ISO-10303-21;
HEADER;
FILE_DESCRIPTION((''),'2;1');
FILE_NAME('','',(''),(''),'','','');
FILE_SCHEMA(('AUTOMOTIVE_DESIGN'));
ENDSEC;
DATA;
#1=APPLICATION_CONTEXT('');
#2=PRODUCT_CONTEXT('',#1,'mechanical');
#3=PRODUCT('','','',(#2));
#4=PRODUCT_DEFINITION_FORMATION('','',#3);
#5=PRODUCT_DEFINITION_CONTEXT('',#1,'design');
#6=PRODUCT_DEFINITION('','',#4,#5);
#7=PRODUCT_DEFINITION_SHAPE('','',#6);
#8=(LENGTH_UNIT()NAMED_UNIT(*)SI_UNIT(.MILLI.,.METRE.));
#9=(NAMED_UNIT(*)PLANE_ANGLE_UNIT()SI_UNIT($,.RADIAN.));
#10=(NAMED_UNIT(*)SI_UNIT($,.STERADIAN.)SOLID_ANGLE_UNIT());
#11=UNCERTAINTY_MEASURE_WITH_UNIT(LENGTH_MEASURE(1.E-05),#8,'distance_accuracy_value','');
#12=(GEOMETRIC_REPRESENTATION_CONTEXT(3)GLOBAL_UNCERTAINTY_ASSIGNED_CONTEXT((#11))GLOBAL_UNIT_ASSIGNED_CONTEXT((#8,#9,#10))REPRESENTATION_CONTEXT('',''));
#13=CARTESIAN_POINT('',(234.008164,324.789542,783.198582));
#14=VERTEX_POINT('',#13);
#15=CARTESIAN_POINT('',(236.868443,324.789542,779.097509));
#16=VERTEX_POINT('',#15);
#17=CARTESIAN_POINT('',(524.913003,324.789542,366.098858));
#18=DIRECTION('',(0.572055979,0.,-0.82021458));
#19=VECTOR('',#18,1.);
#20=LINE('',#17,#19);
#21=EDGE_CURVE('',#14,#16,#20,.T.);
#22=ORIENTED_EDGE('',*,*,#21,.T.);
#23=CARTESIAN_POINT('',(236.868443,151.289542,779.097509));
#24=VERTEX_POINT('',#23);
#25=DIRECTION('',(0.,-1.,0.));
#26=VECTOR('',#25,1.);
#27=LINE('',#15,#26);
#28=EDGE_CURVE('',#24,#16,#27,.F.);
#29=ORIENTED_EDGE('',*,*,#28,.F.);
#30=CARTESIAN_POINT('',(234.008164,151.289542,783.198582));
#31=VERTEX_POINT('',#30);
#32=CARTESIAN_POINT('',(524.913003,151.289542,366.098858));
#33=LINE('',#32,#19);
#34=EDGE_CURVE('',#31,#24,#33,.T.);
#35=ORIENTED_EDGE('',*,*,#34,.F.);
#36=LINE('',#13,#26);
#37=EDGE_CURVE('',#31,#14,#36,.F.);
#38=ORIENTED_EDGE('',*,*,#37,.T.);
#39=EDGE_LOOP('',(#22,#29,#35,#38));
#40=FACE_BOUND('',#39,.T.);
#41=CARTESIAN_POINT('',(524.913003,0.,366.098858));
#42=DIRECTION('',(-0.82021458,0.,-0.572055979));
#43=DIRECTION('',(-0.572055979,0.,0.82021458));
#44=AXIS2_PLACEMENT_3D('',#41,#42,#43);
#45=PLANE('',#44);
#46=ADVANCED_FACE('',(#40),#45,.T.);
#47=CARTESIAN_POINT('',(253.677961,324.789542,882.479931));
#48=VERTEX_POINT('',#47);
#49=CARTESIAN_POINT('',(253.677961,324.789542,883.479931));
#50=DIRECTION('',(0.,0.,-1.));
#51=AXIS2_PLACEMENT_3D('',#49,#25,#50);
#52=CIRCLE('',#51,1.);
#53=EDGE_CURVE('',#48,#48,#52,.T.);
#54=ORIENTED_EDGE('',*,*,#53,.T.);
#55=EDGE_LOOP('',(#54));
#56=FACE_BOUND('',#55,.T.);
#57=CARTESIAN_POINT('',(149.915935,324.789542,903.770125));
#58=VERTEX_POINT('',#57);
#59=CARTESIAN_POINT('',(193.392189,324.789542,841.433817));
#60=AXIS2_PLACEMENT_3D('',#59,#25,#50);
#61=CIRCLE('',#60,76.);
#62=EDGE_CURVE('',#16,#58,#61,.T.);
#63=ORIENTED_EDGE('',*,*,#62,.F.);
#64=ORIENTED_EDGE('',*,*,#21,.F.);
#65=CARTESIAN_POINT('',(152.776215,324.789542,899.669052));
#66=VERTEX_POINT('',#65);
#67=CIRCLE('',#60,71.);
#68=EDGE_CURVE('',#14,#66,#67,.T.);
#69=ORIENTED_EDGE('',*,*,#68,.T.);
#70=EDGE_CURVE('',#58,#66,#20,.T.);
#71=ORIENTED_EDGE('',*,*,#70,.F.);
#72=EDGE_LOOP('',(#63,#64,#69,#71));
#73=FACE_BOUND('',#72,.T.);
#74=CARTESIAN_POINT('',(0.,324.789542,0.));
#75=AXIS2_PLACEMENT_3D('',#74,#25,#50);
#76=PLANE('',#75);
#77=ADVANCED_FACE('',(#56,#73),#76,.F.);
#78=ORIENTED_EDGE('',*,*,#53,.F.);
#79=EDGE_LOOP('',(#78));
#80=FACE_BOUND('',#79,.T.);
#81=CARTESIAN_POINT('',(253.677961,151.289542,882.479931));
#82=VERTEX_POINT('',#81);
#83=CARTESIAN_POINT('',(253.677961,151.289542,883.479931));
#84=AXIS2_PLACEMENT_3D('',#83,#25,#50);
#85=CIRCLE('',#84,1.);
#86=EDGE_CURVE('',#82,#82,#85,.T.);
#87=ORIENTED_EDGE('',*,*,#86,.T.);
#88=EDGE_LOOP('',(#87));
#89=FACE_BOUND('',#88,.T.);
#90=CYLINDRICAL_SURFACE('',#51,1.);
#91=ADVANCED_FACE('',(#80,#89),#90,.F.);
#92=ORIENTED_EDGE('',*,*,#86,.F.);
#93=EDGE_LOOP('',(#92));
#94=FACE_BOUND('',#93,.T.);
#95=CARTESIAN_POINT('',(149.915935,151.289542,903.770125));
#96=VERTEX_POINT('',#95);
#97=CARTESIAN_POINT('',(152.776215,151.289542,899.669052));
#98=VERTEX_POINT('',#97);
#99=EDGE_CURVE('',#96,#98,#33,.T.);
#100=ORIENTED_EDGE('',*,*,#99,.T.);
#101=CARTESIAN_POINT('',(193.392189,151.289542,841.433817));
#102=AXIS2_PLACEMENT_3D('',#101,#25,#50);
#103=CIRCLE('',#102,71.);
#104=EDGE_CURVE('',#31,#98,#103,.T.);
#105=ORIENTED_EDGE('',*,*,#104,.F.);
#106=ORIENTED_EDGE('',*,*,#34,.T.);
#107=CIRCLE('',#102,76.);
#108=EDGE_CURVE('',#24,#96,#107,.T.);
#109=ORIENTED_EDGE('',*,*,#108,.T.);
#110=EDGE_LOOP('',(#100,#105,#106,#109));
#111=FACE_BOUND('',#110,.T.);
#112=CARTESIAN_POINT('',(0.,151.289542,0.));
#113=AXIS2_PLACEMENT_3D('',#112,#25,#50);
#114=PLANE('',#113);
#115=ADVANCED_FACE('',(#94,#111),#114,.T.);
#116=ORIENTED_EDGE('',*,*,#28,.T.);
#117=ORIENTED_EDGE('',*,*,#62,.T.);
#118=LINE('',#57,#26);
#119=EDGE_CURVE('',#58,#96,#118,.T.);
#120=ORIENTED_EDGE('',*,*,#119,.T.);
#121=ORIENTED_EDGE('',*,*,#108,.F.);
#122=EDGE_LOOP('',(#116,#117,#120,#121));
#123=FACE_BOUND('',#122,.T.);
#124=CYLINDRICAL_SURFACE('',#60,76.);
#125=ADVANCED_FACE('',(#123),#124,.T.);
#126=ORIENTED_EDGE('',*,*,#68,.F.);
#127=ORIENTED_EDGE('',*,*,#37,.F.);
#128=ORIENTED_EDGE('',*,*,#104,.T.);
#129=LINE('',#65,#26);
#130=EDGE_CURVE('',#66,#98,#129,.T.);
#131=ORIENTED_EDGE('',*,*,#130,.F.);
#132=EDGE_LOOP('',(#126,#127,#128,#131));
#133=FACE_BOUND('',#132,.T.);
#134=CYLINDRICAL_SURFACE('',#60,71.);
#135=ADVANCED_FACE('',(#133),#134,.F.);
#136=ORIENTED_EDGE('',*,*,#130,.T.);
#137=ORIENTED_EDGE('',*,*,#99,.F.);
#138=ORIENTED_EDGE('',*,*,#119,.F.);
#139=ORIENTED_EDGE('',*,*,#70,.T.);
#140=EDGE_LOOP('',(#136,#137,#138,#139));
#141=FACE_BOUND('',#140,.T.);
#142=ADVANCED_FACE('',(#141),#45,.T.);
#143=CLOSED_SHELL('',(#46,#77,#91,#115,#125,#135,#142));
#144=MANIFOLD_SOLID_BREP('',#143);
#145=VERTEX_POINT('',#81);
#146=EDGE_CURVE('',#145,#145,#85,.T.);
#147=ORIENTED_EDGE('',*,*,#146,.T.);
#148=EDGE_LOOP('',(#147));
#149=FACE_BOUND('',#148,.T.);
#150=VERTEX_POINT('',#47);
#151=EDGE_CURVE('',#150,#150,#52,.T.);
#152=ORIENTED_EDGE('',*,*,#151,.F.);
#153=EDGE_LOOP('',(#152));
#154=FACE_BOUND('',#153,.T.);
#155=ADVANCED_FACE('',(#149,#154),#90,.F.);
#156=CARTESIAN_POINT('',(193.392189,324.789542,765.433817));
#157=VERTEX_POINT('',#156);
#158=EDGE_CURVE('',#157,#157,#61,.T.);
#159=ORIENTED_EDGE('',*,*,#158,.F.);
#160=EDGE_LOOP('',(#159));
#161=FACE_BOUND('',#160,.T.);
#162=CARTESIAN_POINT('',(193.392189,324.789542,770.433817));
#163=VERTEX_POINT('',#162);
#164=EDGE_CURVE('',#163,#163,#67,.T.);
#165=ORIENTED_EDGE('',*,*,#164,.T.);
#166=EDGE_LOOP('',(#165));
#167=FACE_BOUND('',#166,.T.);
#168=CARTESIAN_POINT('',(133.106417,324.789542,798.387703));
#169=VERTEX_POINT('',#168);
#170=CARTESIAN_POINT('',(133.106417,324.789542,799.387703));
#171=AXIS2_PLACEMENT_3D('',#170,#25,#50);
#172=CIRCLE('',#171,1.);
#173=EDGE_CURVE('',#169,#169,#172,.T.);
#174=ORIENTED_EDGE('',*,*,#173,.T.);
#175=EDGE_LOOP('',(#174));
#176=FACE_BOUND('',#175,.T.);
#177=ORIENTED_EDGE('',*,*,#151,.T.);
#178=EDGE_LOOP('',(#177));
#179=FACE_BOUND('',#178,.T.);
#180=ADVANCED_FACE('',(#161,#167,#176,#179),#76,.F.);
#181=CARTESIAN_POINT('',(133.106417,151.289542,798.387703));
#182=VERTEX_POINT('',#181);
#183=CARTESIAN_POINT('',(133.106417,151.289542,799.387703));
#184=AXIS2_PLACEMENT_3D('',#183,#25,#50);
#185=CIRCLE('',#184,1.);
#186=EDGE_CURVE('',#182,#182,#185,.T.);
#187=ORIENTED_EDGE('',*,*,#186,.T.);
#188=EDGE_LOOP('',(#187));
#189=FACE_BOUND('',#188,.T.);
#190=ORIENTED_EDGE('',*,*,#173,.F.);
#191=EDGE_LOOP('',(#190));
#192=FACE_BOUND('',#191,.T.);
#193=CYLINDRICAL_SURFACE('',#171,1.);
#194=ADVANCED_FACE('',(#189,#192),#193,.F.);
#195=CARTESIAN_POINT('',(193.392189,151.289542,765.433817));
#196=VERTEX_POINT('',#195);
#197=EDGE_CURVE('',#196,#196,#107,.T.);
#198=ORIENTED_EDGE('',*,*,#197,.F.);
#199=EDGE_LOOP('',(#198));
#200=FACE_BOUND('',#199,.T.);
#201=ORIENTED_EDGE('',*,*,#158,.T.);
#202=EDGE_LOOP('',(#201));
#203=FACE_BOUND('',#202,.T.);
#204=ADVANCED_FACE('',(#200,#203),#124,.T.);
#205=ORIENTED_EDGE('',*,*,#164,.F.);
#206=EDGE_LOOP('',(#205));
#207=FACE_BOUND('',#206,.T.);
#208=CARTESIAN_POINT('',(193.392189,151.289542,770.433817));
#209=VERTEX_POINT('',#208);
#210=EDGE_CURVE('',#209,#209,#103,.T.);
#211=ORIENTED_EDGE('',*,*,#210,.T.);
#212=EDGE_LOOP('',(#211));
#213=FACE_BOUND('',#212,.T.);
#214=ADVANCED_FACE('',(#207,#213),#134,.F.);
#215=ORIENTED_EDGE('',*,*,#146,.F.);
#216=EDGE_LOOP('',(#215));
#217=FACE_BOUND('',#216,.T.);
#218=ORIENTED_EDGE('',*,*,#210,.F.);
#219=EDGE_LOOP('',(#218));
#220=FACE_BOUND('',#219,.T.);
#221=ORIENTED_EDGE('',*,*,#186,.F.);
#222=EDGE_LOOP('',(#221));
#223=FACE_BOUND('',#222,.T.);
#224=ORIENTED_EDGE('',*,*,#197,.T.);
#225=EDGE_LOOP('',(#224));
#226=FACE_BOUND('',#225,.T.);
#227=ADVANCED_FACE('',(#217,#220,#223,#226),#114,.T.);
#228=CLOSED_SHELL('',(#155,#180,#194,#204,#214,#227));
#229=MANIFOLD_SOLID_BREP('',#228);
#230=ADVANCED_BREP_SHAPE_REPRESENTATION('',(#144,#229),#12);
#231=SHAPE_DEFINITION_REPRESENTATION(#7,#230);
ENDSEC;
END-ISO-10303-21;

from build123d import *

# Parameters (mm, degrees)
SKETCH2_R                   = 1
BOSS_EXTRUDE1_DEPTH         = 173.5
BODY_MOVE_COPY2_START       = 151.289542195
BODY_MOVE_COPY2_OUTLINE_R   = 76
BODY_MOVE_COPY2_OUTLINE_R_2 = 1
BODY_MOVE_COPY2_OUTLINE_R_3 = 71
BODY_MOVE_COPY2_DEPTH       = 173.5
SKETCH9_W                   = 216.594473319
SKETCH9_H                   = 193.225251402
CUT_EXTRUDE2_DEPTH          = 759.638053814


# Read off the part's stored shape, not the designer's step: Body-Move/Copy2
with BuildPart() as part:
    # Sketch2 → Boss-Extrude1 (new body)
    with BuildSketch(Plane.XZ.offset(-151.289542195)):
        with BuildLine():
            ThreePointArc((255.728497138, 884.910071306), (149.915934679, 903.770125014), (131.055880971, 797.957562555))
            ThreePointArc((131.055880971, 797.957562555), (236.86844343, 779.097508847), (255.728497138, 884.910071306))
        make_face()
        with BuildLine():
            ThreePointArc((134.106417421, 799.387702501), (133.406238551, 798.433707066), (132.286202841, 798.815646523))
            ThreePointArc((132.286202841, 798.815646523), (132.534361442, 800.207917082), (133.926632001, 799.95975848))
            ThreePointArc((133.926632001, 799.95975848), (134.060412856, 799.687523631), (134.106417421, 799.387702501))
        make_face(mode=Mode.SUBTRACT)
        with BuildLine():
            ThreePointArc((251.627424238, 882.049791413), (234.008163537, 783.198581747), (135.156953871, 800.817842448))
            ThreePointArc((135.156953871, 800.817842448), (152.776214572, 899.669052114), (251.627424238, 882.049791413))
        make_face(mode=Mode.SUBTRACT)
        with Locations(Location((253.677960688, 883.479931359, 0), (0, 0, 270))):
            Circle(SKETCH2_R, mode=Mode.SUBTRACT)
    extrude(amount=-BOSS_EXTRUDE1_DEPTH)


with BuildPart() as body_2:
    # Body-Move/Copy2 outline → Body-Move/Copy2 (new body)
    with BuildSketch(Plane(origin=(0, 0, 0), x_dir=(1, 0, 0), z_dir=(0, 1, 0)).offset(BODY_MOVE_COPY2_START)):
        with Locations((193.392189054, -841.43381693)):
            Circle(BODY_MOVE_COPY2_OUTLINE_R)
        with Locations((253.677960688, -883.479931359)):
            Circle(BODY_MOVE_COPY2_OUTLINE_R_2, mode=Mode.SUBTRACT)
        with Locations((133.106417421, -799.387702501)):
            Circle(BODY_MOVE_COPY2_OUTLINE_R_2, mode=Mode.SUBTRACT)
        with Locations((193.392189054, -841.43381693)):
            Circle(BODY_MOVE_COPY2_OUTLINE_R_3, mode=Mode.SUBTRACT)
    extrude(amount=BODY_MOVE_COPY2_DEPTH)

    # Sketch9 → Cut-Extrude2 (cut, through all)
    with BuildSketch(Plane(origin=(524.913002616, 0, 366.098858407), x_dir=(0.5720559786237354, 0, -0.8202145800464904), z_dir=(0.8202145800464904, 0, 0.5720559786237354))):
        with Locations((-576.198099642, 233.376121689)):
            Rectangle(SKETCH9_W, SKETCH9_H)
    extrude(amount=-CUT_EXTRUDE2_DEPTH, mode=Mode.SUBTRACT)


solid = Compound([part.part, body_2.part])
